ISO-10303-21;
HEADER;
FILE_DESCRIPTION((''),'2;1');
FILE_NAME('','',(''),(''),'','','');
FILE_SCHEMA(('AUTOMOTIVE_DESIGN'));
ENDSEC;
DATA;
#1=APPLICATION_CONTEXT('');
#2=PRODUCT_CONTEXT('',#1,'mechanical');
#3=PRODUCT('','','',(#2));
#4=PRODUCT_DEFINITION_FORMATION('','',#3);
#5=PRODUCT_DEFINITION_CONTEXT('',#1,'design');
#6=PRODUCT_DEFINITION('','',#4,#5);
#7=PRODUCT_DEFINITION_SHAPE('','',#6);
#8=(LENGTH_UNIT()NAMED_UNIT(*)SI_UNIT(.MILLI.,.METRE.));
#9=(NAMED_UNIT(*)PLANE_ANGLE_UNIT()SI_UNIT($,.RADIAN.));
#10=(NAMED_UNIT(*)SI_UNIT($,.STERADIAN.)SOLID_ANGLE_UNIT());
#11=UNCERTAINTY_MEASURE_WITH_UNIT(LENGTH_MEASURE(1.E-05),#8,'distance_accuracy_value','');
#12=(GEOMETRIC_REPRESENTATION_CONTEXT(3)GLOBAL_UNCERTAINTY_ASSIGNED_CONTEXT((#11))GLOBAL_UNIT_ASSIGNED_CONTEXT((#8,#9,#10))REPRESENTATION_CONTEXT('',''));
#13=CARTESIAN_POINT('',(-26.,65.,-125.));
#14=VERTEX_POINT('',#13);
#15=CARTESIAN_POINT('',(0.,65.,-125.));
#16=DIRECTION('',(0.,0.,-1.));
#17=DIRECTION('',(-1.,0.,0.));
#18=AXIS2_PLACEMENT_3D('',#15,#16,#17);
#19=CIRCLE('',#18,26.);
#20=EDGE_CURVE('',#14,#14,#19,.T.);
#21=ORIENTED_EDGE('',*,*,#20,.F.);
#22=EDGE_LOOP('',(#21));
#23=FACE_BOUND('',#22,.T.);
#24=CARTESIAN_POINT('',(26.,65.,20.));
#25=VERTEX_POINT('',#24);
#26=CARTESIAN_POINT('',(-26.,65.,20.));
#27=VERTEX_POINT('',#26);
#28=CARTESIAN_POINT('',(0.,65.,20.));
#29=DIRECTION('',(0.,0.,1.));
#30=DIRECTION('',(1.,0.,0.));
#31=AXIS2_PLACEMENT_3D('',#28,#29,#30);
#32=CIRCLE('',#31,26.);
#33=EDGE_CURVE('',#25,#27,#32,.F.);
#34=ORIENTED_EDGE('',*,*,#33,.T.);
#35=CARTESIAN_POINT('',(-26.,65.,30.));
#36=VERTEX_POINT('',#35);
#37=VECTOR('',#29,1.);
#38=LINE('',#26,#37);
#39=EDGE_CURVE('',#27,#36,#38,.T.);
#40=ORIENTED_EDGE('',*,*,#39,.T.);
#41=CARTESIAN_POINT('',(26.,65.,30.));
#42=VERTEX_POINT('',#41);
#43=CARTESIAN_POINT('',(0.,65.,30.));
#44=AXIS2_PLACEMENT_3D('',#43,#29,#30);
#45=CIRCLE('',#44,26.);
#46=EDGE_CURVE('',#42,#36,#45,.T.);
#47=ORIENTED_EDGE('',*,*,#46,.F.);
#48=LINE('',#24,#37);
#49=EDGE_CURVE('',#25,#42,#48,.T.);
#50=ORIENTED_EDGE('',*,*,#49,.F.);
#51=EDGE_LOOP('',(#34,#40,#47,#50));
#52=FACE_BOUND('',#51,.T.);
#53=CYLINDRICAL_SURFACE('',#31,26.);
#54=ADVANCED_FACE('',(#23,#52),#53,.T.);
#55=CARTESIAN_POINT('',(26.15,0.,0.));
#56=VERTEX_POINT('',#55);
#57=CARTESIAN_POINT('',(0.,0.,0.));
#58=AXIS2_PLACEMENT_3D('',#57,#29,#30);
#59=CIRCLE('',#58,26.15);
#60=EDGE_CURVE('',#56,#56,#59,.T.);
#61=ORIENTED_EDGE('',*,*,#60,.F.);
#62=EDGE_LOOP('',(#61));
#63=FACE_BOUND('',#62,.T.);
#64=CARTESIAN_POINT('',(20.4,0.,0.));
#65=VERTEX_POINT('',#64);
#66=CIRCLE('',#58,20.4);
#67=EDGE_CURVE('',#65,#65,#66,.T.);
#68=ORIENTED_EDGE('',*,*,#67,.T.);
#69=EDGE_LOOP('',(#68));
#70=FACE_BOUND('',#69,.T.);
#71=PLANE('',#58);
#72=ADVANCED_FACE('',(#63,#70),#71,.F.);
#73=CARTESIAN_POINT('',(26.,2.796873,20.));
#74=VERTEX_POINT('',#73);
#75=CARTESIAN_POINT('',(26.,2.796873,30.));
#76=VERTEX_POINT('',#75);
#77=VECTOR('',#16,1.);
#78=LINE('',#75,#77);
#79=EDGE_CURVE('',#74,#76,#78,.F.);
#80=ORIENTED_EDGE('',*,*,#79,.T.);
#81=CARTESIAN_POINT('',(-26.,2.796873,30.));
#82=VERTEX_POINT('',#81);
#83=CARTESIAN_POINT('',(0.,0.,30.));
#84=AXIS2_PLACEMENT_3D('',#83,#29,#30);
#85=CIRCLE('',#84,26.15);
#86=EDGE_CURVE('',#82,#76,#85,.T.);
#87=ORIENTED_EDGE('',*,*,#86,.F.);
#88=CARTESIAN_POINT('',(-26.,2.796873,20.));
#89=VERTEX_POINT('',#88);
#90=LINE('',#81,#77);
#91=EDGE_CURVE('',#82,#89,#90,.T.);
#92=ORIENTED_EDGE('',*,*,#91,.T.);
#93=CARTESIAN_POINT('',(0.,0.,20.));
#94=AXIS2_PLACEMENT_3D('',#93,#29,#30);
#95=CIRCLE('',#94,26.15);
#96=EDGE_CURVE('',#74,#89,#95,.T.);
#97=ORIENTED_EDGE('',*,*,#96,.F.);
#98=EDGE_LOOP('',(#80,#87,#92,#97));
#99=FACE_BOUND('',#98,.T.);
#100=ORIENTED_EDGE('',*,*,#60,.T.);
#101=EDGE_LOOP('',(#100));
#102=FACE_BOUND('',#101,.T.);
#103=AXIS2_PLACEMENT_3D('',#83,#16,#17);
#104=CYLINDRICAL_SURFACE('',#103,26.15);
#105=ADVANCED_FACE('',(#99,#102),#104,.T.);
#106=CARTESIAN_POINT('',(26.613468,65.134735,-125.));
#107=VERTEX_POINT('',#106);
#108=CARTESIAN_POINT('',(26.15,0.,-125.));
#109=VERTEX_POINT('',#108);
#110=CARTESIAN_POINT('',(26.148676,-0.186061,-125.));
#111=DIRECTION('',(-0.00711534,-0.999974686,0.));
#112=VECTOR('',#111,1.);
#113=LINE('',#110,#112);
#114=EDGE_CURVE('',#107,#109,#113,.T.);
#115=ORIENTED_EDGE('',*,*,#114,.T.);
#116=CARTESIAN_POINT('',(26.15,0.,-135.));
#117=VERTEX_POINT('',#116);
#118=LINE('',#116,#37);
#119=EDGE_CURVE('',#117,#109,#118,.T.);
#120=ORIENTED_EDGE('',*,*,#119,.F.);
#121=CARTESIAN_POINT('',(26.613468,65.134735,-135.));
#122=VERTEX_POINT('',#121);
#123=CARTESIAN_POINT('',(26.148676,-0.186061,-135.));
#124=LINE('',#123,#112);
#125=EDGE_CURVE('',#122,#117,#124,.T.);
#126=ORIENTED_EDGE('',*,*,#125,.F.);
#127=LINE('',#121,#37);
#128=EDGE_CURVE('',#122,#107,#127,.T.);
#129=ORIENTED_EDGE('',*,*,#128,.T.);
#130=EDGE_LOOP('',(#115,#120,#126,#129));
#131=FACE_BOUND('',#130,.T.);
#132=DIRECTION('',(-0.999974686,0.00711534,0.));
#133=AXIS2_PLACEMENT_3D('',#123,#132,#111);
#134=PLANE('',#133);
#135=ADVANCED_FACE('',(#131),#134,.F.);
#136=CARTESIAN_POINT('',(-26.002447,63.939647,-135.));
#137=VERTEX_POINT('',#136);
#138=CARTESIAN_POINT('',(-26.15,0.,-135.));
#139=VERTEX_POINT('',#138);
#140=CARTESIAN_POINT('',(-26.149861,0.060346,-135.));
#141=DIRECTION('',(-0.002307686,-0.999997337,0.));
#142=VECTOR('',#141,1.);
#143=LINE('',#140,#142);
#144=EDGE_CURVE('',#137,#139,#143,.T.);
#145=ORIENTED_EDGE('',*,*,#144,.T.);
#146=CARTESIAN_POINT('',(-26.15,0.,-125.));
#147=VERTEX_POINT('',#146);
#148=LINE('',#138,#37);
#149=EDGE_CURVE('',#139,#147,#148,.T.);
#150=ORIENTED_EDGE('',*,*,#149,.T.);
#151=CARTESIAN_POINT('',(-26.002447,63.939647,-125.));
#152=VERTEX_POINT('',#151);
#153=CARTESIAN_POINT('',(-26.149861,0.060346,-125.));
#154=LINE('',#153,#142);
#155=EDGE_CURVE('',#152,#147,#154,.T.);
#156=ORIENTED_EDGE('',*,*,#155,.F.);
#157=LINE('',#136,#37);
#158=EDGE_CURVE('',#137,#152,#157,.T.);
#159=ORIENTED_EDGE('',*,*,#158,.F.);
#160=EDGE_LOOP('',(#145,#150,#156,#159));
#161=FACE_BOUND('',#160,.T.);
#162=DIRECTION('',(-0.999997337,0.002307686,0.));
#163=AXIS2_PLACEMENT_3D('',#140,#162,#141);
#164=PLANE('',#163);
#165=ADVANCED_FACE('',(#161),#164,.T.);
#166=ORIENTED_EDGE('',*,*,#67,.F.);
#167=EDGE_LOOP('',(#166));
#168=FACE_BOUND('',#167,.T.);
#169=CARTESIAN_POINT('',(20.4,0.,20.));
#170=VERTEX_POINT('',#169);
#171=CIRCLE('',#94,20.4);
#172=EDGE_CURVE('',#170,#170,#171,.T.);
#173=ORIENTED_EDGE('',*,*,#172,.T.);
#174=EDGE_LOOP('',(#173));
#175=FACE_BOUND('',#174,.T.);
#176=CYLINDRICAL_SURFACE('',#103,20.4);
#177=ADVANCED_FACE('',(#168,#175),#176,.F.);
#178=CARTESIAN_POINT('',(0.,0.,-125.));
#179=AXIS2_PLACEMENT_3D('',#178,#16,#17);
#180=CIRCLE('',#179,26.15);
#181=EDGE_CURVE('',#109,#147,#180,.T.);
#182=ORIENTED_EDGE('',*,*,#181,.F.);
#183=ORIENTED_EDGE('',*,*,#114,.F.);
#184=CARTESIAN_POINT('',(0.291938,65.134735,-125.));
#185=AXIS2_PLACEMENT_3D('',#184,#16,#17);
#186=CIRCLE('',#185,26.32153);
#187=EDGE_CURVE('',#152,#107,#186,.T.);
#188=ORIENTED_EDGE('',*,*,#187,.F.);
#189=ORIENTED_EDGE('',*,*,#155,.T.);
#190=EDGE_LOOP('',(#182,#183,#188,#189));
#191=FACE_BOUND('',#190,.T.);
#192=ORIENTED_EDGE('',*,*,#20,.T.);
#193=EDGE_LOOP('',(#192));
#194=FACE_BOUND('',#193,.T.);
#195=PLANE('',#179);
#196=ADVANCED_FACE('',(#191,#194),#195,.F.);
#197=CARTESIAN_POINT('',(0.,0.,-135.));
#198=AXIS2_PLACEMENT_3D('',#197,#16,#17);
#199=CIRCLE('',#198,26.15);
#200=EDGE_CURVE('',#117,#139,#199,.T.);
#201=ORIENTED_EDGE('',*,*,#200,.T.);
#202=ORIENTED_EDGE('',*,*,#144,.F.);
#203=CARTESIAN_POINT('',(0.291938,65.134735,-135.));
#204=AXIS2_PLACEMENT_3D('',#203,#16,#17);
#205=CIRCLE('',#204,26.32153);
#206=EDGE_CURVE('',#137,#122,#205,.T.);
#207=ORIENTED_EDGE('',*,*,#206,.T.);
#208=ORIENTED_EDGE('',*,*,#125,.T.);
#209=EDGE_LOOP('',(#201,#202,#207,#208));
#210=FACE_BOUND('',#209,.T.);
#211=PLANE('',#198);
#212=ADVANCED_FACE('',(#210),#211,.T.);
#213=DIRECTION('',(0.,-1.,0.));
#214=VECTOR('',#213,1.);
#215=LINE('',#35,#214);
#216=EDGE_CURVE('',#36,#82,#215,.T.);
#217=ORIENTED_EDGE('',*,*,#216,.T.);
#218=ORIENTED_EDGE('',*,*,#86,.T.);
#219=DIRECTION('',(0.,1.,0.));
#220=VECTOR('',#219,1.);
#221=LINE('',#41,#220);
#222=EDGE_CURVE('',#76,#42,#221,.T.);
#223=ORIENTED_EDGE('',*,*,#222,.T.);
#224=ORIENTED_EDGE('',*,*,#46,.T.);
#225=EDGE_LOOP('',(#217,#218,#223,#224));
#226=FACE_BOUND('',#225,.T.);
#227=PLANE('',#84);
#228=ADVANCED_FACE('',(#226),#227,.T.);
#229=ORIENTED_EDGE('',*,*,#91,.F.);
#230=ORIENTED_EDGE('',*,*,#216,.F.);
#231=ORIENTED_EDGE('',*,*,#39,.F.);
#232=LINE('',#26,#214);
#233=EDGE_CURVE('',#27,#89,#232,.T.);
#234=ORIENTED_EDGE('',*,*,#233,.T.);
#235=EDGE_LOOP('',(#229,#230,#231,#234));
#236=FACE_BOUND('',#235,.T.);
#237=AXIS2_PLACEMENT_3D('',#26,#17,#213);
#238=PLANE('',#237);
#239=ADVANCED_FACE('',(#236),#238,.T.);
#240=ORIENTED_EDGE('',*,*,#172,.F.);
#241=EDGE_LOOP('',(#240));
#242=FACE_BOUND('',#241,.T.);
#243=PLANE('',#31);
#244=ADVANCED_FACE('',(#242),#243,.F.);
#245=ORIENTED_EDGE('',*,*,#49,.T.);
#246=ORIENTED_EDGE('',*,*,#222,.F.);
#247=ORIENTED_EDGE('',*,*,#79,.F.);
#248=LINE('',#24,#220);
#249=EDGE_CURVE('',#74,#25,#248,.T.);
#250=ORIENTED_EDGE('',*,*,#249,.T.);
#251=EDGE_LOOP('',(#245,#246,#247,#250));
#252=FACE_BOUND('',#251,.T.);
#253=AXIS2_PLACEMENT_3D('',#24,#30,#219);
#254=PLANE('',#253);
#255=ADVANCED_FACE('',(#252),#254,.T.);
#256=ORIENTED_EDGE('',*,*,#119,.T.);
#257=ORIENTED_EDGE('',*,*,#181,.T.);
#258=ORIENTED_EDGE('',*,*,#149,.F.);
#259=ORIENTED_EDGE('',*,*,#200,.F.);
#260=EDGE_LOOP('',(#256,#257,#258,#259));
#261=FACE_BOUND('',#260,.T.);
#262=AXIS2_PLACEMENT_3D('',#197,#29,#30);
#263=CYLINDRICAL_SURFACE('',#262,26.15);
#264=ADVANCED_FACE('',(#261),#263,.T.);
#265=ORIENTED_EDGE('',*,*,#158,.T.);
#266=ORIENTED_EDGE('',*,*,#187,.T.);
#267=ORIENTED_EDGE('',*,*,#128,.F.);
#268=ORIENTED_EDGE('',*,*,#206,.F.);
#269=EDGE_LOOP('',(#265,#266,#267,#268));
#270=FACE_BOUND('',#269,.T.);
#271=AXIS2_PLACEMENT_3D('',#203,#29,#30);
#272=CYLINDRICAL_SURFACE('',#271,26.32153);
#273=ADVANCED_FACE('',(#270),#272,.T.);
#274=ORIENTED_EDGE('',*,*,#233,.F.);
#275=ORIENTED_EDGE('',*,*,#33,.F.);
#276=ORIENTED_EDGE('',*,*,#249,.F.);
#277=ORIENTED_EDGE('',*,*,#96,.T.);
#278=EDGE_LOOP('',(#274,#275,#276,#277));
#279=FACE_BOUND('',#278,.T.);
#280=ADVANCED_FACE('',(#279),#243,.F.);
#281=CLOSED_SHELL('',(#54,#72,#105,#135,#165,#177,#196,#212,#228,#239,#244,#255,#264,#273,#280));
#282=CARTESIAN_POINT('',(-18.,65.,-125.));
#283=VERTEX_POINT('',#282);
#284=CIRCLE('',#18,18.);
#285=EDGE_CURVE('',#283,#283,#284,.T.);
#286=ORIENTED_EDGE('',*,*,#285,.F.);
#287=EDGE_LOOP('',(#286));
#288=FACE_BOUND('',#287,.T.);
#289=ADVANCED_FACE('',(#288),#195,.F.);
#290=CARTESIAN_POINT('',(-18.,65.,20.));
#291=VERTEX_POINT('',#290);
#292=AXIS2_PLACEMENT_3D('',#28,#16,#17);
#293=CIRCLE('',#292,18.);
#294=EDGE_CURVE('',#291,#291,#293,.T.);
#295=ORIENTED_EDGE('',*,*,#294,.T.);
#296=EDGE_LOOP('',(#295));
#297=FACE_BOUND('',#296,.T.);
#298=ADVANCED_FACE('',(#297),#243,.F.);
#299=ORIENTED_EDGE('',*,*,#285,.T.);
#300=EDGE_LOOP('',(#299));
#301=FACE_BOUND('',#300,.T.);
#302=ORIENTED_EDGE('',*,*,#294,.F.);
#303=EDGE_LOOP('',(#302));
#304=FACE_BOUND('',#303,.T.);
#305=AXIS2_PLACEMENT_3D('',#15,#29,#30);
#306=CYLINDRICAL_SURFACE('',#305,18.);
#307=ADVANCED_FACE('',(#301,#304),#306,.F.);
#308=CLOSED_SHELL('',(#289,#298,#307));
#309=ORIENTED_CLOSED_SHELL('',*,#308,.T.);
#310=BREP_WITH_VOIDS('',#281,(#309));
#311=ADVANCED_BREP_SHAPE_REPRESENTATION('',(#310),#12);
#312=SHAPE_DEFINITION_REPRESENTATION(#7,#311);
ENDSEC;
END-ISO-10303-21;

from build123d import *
from build123d.topology import SkipClean

# Parameters (mm, degrees)
SKETCH1_R           = 26.15
SKETCH1_R_2         = 20.4
BOSS_EXTRUDE1_DEPTH = 30
BOSS_EXTRUDE7_DEPTH = 10
SKETCH11_R          = 26
SKETCH11_R_2        = 18
EXTRUDE_THIN1_DEPTH = 145
BOSS_EXTRUDE8_START = 10
BOSS_EXTRUDE8_DEPTH = 10


with BuildPart() as part:
    # Sketch1 → Boss-Extrude1 (new body)
    with BuildSketch(Plane.XY):
        Circle(SKETCH1_R)
        Circle(SKETCH1_R_2, mode=Mode.SUBTRACT)
    extrude(amount=BOSS_EXTRUDE1_DEPTH)

    # Sketch10 → Boss-Extrude7 (add)
    with BuildSketch(Plane.XY.offset(30)):
        with BuildLine():
            Line((-26, 65), (-26, 0))
            ThreePointArc((-26, 0), (0, -26), (26, 0))
            Line((26, 0), (26, 65))
            ThreePointArc((26, 65), (0, 91), (-26, 65))
        make_face()
    extrude(amount=-BOSS_EXTRUDE7_DEPTH)

    # Sketch11 → Extrude-Thin1 (add)
    with SkipClean():  # the faces are left unmerged after this step: merging them gives an invalid solid
        with BuildSketch(Plane(origin=(0, 0, 20), x_dir=(-1, 0, 0), z_dir=(0, 0, -1))):
            with Locations((0, 65)):
                Circle(SKETCH11_R)
            with Locations((0, 65)):
                Circle(SKETCH11_R_2, mode=Mode.SUBTRACT)
        extrude(amount=EXTRUDE_THIN1_DEPTH)
    add(part.part.scale(1), mode=Mode.REPLACE)  # the faces are merged on a copy

    # Sketch12 → Boss-Extrude8 (add)
    with SkipClean():  # the faces are left unmerged after this step: merging them gives an invalid solid
        with BuildSketch(Plane(origin=(0, 0, -125), x_dir=(-1, 0, 0), z_dir=(0, 0, -1)).offset(BOSS_EXTRUDE8_START)):
            with BuildLine():
                ThreePointArc((26.002446969, 63.939646719), (0.305760086, 91.449477206), (-26.613467545, 65.134734686))
                Line((-26.613467545, 65.134734686), (-26.610802329, 64.76017088))
                Line((-26.610802329, 64.76017088), (-26.15, 0))
                ThreePointArc((-26.15, 0), (0, -26.15), (26.15, 0))
                Line((26.15, 0), (26.149721481, 0.120691665))
                Line((26.149721481, 0.120691665), (26.002446969, 63.939646719))
            make_face()
        extrude(amount=-BOSS_EXTRUDE8_DEPTH)


solid = part.part
